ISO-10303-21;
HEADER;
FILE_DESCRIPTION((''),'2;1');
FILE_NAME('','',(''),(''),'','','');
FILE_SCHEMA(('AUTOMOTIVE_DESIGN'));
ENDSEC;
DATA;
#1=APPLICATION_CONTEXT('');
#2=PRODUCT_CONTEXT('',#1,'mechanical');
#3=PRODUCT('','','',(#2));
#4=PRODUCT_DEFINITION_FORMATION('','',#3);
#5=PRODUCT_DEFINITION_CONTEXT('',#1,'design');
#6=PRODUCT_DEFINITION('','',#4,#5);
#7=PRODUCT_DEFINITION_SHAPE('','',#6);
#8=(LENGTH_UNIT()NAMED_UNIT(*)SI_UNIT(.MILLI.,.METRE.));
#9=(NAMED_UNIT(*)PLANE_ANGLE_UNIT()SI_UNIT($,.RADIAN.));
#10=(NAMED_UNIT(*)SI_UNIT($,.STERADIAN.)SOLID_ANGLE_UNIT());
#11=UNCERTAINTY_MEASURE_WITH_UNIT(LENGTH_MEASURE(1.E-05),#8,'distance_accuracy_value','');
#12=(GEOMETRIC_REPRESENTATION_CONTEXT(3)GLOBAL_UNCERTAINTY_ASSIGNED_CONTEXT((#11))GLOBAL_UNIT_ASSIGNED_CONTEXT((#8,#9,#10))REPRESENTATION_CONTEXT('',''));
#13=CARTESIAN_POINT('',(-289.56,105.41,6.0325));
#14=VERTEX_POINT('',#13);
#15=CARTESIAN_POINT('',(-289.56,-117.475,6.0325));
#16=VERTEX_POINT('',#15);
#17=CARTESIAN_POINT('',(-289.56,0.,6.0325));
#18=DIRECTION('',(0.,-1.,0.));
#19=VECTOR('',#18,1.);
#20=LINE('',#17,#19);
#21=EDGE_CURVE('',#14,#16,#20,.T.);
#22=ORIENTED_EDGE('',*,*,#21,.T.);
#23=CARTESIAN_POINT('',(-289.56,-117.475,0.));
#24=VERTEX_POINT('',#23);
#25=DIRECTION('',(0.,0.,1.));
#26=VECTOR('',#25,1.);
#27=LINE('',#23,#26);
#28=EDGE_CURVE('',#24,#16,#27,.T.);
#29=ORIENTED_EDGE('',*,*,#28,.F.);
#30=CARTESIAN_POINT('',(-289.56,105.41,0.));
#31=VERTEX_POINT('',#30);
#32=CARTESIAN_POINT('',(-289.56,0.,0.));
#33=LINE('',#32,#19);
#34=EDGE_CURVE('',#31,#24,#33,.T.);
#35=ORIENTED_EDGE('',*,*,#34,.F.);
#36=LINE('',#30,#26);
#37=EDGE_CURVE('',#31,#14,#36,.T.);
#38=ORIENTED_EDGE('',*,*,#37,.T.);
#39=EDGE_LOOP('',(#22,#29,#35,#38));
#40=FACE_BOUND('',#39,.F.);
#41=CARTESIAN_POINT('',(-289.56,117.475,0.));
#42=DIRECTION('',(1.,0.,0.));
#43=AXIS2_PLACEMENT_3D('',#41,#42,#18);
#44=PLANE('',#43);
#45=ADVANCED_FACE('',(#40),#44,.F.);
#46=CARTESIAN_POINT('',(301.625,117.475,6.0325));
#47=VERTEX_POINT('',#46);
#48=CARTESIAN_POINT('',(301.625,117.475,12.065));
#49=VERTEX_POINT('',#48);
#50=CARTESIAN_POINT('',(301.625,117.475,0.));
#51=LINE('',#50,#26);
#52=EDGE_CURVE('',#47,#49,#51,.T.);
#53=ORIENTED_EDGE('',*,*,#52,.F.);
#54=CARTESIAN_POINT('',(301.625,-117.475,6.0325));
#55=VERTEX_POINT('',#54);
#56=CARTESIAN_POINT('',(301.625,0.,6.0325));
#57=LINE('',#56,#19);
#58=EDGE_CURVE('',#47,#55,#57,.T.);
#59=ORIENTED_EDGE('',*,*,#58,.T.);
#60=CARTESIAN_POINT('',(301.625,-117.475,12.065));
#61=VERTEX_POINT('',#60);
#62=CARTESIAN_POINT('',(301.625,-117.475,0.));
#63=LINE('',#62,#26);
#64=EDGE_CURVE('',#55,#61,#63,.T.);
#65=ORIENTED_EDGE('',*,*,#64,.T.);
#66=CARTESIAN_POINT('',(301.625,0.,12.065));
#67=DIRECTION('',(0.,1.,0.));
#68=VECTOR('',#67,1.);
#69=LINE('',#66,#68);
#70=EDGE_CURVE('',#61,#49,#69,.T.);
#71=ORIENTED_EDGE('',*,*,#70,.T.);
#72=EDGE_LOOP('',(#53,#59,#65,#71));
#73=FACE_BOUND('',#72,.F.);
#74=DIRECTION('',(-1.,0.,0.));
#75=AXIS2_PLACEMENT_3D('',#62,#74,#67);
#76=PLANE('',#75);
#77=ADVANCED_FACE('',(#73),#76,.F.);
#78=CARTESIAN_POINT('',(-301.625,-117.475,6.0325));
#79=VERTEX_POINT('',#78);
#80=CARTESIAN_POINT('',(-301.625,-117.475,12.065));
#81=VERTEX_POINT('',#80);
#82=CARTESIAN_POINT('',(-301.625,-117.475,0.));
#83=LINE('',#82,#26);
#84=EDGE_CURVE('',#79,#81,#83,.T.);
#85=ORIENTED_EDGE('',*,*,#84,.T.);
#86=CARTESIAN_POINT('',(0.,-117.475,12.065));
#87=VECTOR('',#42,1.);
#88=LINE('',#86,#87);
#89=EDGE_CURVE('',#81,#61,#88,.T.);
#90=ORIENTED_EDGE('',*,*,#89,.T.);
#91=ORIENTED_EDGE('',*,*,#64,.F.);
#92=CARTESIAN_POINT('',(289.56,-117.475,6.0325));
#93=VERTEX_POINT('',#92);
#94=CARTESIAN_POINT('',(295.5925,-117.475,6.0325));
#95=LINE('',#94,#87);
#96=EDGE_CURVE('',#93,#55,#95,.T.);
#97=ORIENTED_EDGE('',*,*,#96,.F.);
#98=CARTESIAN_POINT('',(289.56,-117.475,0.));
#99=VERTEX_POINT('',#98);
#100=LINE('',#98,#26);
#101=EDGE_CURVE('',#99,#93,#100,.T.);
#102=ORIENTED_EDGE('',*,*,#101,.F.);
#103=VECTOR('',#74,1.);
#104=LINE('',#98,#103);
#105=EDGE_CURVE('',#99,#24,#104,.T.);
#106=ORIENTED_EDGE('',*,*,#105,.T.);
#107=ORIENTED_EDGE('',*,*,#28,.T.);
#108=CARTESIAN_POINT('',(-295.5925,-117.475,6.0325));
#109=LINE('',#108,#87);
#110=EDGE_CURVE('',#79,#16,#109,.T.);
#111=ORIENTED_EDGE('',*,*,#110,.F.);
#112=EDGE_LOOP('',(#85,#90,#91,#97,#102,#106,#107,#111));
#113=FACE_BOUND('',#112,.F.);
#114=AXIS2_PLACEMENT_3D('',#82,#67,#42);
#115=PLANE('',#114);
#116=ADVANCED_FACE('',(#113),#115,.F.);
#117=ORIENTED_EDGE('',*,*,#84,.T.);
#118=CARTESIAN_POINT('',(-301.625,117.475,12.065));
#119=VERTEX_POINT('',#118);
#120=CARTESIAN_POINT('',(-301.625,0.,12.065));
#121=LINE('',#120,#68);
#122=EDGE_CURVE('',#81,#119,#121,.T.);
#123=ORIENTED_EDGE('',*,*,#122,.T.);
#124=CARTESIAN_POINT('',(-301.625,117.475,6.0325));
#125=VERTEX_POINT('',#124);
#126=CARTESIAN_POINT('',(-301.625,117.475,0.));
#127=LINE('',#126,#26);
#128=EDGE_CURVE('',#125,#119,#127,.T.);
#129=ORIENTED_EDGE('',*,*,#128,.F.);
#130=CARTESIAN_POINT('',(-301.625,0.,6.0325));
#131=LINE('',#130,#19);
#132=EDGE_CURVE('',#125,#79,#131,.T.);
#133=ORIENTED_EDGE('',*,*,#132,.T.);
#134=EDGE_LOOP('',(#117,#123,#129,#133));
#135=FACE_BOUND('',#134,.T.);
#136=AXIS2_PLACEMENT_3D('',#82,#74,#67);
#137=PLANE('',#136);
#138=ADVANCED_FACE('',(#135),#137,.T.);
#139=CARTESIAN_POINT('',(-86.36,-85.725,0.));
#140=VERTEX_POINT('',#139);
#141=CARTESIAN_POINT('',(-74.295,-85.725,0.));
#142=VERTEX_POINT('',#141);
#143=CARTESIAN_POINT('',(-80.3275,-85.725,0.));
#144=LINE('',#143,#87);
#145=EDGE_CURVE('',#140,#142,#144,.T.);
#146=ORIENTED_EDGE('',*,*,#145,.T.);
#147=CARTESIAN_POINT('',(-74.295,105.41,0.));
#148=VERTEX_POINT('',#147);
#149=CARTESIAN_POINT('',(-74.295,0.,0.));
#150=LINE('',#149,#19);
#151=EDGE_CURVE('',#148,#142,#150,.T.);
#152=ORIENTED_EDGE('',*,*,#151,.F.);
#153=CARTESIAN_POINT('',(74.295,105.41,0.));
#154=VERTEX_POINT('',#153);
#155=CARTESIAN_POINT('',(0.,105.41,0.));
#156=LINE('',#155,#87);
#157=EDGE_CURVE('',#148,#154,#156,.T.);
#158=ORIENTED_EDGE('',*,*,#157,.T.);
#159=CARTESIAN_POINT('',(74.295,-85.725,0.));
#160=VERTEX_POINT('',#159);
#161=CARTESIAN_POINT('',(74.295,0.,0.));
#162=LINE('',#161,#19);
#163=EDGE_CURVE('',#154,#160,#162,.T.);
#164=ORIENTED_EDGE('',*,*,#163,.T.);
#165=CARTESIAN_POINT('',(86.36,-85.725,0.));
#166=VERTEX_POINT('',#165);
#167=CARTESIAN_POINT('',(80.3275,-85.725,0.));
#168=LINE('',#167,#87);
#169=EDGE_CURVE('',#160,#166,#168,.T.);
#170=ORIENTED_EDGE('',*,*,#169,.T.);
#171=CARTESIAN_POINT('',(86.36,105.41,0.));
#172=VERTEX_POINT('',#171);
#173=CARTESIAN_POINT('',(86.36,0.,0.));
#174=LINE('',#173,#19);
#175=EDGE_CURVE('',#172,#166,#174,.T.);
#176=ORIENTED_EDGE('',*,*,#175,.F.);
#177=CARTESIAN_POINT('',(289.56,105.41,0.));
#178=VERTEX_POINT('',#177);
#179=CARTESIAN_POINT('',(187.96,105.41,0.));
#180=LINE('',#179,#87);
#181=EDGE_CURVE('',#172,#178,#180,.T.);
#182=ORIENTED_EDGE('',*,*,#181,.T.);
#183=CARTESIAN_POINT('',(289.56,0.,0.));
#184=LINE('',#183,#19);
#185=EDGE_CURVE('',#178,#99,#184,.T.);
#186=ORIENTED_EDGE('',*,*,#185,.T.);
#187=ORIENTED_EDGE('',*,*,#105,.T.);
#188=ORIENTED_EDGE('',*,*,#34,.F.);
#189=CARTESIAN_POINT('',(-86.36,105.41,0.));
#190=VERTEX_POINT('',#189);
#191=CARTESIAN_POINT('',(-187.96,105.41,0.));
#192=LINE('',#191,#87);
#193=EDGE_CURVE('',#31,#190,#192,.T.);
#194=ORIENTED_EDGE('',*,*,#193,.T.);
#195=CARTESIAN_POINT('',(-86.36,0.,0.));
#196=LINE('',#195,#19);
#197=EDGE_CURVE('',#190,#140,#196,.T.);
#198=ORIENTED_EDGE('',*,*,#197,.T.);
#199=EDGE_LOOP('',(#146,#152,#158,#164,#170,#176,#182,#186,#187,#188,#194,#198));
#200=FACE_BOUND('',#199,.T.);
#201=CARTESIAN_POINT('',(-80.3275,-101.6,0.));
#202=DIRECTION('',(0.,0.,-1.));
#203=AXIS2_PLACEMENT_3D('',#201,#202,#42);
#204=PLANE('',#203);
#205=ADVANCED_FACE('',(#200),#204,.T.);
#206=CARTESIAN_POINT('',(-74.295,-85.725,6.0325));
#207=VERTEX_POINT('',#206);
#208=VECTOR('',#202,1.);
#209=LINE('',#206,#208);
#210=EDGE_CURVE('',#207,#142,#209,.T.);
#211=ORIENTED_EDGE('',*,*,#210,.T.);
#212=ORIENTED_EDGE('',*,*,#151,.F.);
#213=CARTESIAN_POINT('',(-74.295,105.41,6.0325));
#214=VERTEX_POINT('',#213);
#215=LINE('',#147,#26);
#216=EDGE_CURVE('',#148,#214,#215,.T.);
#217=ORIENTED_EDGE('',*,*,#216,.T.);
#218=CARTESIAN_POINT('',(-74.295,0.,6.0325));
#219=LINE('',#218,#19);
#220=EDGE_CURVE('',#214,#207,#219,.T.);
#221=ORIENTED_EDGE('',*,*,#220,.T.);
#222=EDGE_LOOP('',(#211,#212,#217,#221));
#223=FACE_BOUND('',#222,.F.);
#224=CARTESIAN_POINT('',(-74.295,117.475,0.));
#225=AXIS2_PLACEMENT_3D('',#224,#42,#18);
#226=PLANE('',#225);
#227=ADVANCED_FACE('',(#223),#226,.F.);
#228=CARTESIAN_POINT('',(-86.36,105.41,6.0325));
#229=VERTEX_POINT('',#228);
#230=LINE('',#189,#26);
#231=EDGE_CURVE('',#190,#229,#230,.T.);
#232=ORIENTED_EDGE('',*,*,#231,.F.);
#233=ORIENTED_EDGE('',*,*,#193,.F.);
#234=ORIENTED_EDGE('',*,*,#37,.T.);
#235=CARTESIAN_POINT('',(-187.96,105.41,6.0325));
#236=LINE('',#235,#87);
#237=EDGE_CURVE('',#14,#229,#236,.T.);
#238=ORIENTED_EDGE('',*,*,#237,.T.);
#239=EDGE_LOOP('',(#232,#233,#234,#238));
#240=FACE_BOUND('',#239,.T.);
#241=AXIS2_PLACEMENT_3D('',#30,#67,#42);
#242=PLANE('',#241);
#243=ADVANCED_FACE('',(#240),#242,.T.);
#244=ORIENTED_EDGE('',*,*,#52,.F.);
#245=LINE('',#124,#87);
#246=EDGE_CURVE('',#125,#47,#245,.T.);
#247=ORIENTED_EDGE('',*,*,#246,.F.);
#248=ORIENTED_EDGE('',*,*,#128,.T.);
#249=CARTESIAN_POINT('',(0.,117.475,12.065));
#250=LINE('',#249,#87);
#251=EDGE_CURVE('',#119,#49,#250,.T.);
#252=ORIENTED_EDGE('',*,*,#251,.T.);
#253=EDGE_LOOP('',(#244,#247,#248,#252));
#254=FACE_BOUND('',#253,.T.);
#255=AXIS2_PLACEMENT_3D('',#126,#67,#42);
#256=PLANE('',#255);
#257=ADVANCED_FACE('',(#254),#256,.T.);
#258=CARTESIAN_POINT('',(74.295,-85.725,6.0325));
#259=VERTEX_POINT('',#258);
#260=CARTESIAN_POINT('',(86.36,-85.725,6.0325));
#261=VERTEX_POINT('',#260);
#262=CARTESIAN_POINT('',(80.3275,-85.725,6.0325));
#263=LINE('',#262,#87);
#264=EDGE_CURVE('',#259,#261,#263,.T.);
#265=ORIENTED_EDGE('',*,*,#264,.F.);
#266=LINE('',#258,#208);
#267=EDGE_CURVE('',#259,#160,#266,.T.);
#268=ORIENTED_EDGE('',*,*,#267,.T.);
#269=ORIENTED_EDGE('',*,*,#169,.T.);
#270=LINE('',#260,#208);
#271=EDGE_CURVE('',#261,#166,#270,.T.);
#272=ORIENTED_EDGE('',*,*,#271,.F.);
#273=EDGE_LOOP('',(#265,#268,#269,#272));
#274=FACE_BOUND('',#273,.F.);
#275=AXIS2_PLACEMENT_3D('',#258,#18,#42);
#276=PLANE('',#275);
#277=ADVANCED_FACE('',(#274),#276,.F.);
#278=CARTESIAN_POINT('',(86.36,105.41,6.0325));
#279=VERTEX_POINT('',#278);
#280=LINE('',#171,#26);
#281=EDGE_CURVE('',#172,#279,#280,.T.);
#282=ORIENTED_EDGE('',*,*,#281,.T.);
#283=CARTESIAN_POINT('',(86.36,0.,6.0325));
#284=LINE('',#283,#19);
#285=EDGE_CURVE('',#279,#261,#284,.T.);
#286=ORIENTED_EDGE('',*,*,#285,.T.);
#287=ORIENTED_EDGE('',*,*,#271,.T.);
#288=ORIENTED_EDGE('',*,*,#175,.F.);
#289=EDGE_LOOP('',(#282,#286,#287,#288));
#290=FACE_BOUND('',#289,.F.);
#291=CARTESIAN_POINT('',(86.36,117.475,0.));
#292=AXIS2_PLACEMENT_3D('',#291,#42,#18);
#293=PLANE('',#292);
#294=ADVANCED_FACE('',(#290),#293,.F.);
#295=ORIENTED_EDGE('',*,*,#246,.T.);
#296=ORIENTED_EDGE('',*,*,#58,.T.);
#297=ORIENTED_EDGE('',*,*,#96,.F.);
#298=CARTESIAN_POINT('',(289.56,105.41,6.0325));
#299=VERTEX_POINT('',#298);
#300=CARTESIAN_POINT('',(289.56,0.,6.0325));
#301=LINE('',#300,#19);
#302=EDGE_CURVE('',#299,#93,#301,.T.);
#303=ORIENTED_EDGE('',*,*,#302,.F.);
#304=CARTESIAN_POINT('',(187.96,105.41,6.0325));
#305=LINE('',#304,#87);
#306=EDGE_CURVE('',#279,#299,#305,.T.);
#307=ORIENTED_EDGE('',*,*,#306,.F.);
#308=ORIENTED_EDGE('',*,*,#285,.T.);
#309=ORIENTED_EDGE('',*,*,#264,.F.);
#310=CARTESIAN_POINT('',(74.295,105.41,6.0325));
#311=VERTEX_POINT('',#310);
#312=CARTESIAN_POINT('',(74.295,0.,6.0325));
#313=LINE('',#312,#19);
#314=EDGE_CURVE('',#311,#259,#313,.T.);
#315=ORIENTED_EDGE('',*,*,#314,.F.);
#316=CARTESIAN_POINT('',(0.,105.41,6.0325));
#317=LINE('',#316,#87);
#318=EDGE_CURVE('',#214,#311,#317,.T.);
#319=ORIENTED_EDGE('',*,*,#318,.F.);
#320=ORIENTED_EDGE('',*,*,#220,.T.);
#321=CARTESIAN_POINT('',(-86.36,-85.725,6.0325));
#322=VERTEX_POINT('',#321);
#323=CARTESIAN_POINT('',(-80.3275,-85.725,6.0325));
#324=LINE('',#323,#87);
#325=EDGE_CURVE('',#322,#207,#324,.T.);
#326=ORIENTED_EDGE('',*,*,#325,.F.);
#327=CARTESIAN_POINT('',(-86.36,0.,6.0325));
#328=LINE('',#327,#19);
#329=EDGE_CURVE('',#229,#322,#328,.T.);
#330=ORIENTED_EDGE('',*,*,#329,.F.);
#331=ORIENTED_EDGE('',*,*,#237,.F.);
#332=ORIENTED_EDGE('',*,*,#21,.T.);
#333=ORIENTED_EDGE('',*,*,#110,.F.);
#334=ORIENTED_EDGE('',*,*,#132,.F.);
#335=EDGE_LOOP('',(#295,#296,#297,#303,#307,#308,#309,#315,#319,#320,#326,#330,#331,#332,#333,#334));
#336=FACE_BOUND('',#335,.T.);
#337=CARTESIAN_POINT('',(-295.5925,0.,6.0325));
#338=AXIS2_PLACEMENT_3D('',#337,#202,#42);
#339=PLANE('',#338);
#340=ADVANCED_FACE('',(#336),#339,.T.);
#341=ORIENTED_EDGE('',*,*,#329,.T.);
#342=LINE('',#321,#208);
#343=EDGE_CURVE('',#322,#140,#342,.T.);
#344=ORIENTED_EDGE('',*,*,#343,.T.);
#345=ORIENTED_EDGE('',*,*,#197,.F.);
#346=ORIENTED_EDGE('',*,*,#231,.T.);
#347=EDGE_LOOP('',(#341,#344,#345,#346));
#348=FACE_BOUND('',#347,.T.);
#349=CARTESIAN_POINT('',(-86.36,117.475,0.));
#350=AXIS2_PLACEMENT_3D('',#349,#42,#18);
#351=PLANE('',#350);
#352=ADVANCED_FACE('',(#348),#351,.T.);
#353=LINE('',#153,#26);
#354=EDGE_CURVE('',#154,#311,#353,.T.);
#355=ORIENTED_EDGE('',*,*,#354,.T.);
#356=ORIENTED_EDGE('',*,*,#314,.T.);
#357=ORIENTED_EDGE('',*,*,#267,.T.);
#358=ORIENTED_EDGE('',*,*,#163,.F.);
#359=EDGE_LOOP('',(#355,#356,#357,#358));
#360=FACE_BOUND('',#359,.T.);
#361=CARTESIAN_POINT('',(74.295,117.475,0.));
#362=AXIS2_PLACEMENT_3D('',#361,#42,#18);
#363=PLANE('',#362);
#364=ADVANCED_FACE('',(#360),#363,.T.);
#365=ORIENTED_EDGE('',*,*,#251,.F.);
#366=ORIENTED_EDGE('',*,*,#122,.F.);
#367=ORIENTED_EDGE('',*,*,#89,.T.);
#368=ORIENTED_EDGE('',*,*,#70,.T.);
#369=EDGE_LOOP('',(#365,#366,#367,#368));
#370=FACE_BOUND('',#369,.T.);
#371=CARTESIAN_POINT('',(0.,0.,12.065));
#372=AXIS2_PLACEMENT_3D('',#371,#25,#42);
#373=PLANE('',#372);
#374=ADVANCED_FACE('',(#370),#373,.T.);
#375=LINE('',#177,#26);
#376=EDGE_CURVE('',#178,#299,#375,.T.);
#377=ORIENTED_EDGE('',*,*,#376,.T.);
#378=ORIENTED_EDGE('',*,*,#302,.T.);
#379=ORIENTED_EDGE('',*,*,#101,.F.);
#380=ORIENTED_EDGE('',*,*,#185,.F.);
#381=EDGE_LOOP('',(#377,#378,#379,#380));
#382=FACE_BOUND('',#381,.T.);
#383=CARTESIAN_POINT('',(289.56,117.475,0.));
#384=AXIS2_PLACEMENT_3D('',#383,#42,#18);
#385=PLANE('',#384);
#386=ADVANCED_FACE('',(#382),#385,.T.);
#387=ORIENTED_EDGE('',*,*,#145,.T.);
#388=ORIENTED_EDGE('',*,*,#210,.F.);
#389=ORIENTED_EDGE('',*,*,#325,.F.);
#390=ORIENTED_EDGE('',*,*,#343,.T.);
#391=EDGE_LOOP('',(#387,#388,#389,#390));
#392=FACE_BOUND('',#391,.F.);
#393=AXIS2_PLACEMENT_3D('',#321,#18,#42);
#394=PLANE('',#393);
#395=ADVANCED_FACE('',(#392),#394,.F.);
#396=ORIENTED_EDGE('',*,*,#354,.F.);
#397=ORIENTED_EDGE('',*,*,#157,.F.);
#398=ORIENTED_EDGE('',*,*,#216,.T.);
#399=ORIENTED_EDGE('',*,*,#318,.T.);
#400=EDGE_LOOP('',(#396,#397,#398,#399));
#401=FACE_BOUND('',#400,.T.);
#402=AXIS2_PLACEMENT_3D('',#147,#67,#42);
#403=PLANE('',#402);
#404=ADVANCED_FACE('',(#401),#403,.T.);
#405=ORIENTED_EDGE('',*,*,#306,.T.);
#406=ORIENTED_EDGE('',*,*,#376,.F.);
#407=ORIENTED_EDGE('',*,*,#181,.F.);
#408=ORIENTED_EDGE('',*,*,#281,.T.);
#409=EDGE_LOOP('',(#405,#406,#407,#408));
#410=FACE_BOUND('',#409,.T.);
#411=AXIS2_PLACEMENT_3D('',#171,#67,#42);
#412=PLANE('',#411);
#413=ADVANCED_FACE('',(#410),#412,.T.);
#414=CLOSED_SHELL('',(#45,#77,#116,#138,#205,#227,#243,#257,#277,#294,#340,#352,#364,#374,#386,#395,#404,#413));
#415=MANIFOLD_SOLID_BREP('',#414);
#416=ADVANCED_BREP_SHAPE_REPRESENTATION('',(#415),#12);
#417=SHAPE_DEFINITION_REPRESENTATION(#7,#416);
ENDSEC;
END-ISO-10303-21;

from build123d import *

# Parameters (mm, degrees)
F1_W      = 603.25
F1_H      = 234.95
F2_DEPTH  = 12.065
F3_W      = 12.065
F3_H      = 234.95
F4_DEPTH  = 6.0325
F5_W      = 12.065
F5_H      = 234.95
F6_DEPTH  = 6.0325
F7_W      = 12.065
F7_H      = 234.95
F8_DEPTH  = 6.0325
F9_W      = 12.065
F9_H      = 234.95
F10_DEPTH = 6.0325
F11_W     = 203.2
F11_H     = 12.065
F14_DEPTH = 6.0325
F12_W     = 148.59
F12_H     = 12.065
F15_DEPTH = 6.0325
F13_W     = 203.2
F13_H     = 12.065
F16_DEPTH = 6.0325
F17_W     = 12.065
F17_H     = 31.75
F18_DEPTH = 6.0325
F19_W     = 12.065
F19_H     = 31.75
F20_DEPTH = 6.0325


# Not quite as in the source:
# - a variable given as a bare number and used for a length is read in inches; the dataset says mm whatever the document's units were


with BuildPart() as f2:
    # F1 (on Top) → F2 (new body)
    with BuildSketch(Plane.XY):
        Rectangle(F1_W, F1_H)
    extrude(amount=F2_DEPTH)

    # F3 (on face) → F4 (cut)
    with BuildSketch(Plane(origin=(0, 0, 0), x_dir=(1, 0, 0), z_dir=(0, 0, -1))):
        with Locations((-295.5925, 0)):
            Rectangle(F3_W, F3_H)
    extrude(amount=-F4_DEPTH, mode=Mode.SUBTRACT)

    # F5 (on face) → F6 (cut)
    with BuildSketch(Plane(origin=(0, 0, 0), x_dir=(1, 0, 0), z_dir=(0, 0, -1))):
        with Locations((295.5925, 0)):
            Rectangle(F5_W, F5_H)
    extrude(amount=-F6_DEPTH, mode=Mode.SUBTRACT)

    # F7 (on face) → F8 (cut)
    with BuildSketch(Plane(origin=(0, 0, 0), x_dir=(1, 0, 0), z_dir=(0, 0, -1))):
        with Locations((80.3275, 0)):
            Rectangle(F7_W, F7_H)
    extrude(amount=-F8_DEPTH, mode=Mode.SUBTRACT)

    # F9 (on face) → F10 (cut)
    with BuildSketch(Plane(origin=(0, 0, 0), x_dir=(1, 0, 0), z_dir=(0, 0, -1))):
        with Locations((-80.3275, 0)):
            Rectangle(F9_W, F9_H)
    extrude(amount=-F10_DEPTH, mode=Mode.SUBTRACT)

    # F11 (on face) → F14 (cut)
    with BuildSketch(Plane(origin=(0, 0, 0), x_dir=(1, 0, 0), z_dir=(0, 0, -1))):
        with Locations((187.96, -111.4425)):
            Rectangle(F11_W, F11_H)
    extrude(amount=-F14_DEPTH, mode=Mode.SUBTRACT)

    # F12 (on face) → F15 (cut)
    with BuildSketch(Plane(origin=(0, 0, 0), x_dir=(1, 0, 0), z_dir=(0, 0, -1))):
        with Locations((0, -111.4425)):
            Rectangle(F12_W, F12_H)
    extrude(amount=-F15_DEPTH, mode=Mode.SUBTRACT)

    # F13 (on face) → F16 (cut)
    with BuildSketch(Plane(origin=(0, 0, 0), x_dir=(1, 0, 0), z_dir=(0, 0, -1))):
        with Locations((-187.96, -111.4425)):
            Rectangle(F13_W, F13_H)
    extrude(amount=-F16_DEPTH, mode=Mode.SUBTRACT)

    # F17 (on face) → F18 (join)
    with BuildSketch(Plane(origin=(0, 0, 6.0325), x_dir=(1, 0, 0), z_dir=(0, 0, -1))):
        with Locations((80.3275, 101.6)):
            Rectangle(F17_W, F17_H)
    extrude(amount=F18_DEPTH)

    # F19 (on face) → F20 (join)
    with BuildSketch(Plane(origin=(0, 0, 6.0325), x_dir=(1, 0, 0), z_dir=(0, 0, -1))):
        with Locations((-80.3275, 101.6)):
            Rectangle(F19_W, F19_H)
    extrude(amount=F20_DEPTH)


solid = f2.part
